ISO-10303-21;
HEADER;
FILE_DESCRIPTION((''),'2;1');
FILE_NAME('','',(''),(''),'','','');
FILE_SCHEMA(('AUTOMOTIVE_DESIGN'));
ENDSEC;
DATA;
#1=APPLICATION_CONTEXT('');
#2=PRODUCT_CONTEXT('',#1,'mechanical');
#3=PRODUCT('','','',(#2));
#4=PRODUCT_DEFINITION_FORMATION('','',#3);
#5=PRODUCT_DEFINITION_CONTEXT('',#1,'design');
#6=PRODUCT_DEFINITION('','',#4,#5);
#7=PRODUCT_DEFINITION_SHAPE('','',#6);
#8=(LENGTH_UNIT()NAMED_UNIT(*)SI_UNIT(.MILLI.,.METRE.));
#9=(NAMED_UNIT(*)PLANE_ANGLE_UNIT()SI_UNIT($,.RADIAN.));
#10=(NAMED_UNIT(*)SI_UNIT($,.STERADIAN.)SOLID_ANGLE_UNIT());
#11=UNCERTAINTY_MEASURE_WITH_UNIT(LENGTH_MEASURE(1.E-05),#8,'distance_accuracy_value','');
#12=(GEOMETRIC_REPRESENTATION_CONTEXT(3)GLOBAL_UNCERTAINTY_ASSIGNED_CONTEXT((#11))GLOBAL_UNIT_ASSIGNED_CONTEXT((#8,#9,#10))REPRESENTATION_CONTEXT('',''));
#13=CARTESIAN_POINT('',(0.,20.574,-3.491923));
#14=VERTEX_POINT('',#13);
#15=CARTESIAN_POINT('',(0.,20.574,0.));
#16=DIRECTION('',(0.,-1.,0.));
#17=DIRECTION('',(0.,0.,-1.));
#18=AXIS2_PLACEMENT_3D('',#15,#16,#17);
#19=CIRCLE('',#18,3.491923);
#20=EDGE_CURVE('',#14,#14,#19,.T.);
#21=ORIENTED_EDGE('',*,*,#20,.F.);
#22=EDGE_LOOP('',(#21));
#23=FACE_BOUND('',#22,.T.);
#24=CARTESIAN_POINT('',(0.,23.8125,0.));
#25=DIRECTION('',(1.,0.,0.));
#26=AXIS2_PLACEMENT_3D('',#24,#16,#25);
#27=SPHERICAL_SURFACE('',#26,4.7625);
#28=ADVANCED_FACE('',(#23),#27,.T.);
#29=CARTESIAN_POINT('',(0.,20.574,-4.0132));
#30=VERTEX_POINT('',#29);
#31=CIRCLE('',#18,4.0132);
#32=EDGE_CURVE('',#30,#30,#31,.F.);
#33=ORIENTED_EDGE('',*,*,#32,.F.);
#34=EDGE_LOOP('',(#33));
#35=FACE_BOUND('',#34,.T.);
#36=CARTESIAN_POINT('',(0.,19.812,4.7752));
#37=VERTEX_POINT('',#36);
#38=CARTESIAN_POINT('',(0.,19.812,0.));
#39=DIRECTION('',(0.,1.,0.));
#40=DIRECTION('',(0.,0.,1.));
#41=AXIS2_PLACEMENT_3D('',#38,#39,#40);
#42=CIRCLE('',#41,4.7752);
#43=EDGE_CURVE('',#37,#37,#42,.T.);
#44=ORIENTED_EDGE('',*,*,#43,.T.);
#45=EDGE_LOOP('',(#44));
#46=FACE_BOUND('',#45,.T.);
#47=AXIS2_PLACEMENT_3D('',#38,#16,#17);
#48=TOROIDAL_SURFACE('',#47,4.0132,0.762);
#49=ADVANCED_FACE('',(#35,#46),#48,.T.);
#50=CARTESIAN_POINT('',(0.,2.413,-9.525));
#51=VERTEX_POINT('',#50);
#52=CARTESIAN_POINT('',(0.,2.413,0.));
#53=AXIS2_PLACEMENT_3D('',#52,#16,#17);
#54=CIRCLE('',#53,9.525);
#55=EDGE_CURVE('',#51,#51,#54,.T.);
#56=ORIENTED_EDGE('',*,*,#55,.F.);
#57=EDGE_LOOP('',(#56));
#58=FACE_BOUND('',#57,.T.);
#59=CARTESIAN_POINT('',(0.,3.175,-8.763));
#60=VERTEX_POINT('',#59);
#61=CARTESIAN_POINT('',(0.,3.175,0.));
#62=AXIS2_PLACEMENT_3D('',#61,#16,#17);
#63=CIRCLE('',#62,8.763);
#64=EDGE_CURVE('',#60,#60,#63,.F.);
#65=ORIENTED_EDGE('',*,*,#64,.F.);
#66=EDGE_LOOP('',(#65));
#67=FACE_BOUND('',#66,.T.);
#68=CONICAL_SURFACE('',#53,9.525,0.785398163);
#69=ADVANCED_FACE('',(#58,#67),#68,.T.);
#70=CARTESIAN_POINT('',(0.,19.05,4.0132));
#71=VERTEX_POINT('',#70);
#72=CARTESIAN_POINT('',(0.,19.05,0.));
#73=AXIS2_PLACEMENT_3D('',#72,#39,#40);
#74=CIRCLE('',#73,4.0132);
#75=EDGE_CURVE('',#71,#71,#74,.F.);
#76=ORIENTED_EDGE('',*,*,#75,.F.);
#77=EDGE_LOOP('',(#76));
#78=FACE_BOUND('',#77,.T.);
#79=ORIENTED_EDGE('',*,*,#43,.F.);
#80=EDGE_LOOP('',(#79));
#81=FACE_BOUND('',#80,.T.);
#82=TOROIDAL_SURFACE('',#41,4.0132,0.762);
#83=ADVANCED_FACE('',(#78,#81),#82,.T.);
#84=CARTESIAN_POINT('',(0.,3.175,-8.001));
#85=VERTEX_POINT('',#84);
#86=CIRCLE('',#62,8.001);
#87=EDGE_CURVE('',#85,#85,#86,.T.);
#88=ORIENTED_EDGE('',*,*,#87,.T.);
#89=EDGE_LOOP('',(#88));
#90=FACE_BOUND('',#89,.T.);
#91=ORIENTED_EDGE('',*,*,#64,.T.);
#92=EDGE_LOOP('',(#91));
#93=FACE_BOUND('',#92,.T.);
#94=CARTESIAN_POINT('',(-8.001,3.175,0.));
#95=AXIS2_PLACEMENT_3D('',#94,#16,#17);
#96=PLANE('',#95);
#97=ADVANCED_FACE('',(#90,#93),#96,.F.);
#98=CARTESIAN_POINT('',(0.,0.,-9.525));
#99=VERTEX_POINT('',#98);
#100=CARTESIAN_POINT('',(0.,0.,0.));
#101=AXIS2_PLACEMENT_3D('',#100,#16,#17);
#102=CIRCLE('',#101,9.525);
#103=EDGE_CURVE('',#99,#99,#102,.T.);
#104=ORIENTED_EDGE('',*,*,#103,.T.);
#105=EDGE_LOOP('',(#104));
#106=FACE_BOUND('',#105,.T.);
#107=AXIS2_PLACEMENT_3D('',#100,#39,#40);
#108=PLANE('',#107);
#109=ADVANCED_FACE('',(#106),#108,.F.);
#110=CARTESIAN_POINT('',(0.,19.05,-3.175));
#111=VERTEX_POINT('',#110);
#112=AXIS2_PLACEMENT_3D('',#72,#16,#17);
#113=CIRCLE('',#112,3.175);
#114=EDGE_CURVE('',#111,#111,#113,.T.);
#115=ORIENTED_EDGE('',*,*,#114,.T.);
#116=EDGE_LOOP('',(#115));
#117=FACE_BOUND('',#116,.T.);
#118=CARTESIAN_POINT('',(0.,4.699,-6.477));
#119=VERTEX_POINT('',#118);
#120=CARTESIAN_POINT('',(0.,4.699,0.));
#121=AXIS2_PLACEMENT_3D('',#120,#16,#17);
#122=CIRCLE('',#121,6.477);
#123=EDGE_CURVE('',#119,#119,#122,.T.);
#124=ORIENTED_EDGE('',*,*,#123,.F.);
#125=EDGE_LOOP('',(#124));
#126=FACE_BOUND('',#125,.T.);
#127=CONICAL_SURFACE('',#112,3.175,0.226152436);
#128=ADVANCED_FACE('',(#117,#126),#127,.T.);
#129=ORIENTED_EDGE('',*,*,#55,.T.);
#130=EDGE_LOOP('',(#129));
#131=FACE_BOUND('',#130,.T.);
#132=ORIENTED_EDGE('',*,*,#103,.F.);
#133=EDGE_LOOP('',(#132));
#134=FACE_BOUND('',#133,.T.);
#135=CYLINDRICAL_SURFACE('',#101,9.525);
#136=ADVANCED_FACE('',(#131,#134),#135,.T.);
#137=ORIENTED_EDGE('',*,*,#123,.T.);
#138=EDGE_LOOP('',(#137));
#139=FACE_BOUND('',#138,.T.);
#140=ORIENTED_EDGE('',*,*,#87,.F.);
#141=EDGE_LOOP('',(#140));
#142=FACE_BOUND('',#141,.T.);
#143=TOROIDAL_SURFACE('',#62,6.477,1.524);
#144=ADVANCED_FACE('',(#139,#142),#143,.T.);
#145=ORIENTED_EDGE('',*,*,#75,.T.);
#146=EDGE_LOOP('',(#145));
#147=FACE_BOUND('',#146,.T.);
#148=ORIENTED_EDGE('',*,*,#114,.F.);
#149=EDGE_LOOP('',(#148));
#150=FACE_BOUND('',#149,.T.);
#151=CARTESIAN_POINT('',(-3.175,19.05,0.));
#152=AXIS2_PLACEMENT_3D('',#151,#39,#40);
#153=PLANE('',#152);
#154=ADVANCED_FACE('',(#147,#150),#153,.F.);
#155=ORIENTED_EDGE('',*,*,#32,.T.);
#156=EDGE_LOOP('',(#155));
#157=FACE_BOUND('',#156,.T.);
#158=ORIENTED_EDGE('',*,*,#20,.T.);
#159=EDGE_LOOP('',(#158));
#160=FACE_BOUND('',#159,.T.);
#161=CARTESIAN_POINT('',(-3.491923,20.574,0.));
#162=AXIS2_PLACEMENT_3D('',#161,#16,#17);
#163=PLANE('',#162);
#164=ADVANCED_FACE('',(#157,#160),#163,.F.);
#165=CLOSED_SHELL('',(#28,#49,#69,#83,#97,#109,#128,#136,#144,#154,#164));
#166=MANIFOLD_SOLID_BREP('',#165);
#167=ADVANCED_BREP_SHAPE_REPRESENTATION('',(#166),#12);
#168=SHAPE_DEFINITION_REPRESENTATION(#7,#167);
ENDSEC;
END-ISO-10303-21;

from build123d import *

# Parameters (mm, degrees)
CHAMFER1_SIZE = 0.762
FILLET2_R     = 1.524
FILLET3_R     = 0.762


with BuildPart() as part:
    # Sketch1 → Revolve1 (revolve)
    with BuildSketch(Plane.XY, mode=Mode.PRIVATE) as revolve1_sk:
        with BuildLine():
            Line((0, 0), (-9.525, 0))
            Line((-9.525, 0), (-9.525, 3.175))
            Line((-9.525, 3.175), (-8.001, 3.175))
            Line((-8.001, 3.175), (-8.001, 4.699))
            Line((-8.001, 4.699), (-6.477, 4.699))
            Line((-6.477, 4.699), (-3.175, 19.05))
            Line((-3.175, 19.05), (-4.7752, 19.05))
            Line((-4.7752, 19.05), (-4.7752, 20.574))
            Line((-4.7752, 20.574), (-3.49192268, 20.574))
            ThreePointArc((-3.49192268, 20.574), (-4.364903349, 25.7175), (0, 28.575))
            Line((0, 28.575), (0, 0))
        make_face()
    revolve(revolve1_sk.sketch.rotate(Axis((0, 0, 0), (0, 1, 0)), 270), axis=Axis((0, 0, 0), (0, 1, 0)))

    # Chamfer1
    chamfer1_edges = [part.edges().sort_by_distance(p)[0] for p in [
        (0, 3.175, 9.525),
    ]]
    chamfer(chamfer1_edges, length=CHAMFER1_SIZE)

    # Fillet2
    fillet2_edges = [part.edges().sort_by_distance(p)[0] for p in [
        (0, 4.699, 8.001),
    ]]
    fillet(fillet2_edges, radius=FILLET2_R - 0.0001)  # a hair under: the kernel refuses the full size

    # Fillet3
    fillet3_edges = [part.edges().sort_by_distance(p)[0] for p in [
        (0, 19.05, 4.7752),
        (0, 20.574, 4.7752),
    ]]
    fillet(fillet3_edges, radius=FILLET3_R - 0.0001)  # a hair under: the kernel refuses the full size


solid = part.part
